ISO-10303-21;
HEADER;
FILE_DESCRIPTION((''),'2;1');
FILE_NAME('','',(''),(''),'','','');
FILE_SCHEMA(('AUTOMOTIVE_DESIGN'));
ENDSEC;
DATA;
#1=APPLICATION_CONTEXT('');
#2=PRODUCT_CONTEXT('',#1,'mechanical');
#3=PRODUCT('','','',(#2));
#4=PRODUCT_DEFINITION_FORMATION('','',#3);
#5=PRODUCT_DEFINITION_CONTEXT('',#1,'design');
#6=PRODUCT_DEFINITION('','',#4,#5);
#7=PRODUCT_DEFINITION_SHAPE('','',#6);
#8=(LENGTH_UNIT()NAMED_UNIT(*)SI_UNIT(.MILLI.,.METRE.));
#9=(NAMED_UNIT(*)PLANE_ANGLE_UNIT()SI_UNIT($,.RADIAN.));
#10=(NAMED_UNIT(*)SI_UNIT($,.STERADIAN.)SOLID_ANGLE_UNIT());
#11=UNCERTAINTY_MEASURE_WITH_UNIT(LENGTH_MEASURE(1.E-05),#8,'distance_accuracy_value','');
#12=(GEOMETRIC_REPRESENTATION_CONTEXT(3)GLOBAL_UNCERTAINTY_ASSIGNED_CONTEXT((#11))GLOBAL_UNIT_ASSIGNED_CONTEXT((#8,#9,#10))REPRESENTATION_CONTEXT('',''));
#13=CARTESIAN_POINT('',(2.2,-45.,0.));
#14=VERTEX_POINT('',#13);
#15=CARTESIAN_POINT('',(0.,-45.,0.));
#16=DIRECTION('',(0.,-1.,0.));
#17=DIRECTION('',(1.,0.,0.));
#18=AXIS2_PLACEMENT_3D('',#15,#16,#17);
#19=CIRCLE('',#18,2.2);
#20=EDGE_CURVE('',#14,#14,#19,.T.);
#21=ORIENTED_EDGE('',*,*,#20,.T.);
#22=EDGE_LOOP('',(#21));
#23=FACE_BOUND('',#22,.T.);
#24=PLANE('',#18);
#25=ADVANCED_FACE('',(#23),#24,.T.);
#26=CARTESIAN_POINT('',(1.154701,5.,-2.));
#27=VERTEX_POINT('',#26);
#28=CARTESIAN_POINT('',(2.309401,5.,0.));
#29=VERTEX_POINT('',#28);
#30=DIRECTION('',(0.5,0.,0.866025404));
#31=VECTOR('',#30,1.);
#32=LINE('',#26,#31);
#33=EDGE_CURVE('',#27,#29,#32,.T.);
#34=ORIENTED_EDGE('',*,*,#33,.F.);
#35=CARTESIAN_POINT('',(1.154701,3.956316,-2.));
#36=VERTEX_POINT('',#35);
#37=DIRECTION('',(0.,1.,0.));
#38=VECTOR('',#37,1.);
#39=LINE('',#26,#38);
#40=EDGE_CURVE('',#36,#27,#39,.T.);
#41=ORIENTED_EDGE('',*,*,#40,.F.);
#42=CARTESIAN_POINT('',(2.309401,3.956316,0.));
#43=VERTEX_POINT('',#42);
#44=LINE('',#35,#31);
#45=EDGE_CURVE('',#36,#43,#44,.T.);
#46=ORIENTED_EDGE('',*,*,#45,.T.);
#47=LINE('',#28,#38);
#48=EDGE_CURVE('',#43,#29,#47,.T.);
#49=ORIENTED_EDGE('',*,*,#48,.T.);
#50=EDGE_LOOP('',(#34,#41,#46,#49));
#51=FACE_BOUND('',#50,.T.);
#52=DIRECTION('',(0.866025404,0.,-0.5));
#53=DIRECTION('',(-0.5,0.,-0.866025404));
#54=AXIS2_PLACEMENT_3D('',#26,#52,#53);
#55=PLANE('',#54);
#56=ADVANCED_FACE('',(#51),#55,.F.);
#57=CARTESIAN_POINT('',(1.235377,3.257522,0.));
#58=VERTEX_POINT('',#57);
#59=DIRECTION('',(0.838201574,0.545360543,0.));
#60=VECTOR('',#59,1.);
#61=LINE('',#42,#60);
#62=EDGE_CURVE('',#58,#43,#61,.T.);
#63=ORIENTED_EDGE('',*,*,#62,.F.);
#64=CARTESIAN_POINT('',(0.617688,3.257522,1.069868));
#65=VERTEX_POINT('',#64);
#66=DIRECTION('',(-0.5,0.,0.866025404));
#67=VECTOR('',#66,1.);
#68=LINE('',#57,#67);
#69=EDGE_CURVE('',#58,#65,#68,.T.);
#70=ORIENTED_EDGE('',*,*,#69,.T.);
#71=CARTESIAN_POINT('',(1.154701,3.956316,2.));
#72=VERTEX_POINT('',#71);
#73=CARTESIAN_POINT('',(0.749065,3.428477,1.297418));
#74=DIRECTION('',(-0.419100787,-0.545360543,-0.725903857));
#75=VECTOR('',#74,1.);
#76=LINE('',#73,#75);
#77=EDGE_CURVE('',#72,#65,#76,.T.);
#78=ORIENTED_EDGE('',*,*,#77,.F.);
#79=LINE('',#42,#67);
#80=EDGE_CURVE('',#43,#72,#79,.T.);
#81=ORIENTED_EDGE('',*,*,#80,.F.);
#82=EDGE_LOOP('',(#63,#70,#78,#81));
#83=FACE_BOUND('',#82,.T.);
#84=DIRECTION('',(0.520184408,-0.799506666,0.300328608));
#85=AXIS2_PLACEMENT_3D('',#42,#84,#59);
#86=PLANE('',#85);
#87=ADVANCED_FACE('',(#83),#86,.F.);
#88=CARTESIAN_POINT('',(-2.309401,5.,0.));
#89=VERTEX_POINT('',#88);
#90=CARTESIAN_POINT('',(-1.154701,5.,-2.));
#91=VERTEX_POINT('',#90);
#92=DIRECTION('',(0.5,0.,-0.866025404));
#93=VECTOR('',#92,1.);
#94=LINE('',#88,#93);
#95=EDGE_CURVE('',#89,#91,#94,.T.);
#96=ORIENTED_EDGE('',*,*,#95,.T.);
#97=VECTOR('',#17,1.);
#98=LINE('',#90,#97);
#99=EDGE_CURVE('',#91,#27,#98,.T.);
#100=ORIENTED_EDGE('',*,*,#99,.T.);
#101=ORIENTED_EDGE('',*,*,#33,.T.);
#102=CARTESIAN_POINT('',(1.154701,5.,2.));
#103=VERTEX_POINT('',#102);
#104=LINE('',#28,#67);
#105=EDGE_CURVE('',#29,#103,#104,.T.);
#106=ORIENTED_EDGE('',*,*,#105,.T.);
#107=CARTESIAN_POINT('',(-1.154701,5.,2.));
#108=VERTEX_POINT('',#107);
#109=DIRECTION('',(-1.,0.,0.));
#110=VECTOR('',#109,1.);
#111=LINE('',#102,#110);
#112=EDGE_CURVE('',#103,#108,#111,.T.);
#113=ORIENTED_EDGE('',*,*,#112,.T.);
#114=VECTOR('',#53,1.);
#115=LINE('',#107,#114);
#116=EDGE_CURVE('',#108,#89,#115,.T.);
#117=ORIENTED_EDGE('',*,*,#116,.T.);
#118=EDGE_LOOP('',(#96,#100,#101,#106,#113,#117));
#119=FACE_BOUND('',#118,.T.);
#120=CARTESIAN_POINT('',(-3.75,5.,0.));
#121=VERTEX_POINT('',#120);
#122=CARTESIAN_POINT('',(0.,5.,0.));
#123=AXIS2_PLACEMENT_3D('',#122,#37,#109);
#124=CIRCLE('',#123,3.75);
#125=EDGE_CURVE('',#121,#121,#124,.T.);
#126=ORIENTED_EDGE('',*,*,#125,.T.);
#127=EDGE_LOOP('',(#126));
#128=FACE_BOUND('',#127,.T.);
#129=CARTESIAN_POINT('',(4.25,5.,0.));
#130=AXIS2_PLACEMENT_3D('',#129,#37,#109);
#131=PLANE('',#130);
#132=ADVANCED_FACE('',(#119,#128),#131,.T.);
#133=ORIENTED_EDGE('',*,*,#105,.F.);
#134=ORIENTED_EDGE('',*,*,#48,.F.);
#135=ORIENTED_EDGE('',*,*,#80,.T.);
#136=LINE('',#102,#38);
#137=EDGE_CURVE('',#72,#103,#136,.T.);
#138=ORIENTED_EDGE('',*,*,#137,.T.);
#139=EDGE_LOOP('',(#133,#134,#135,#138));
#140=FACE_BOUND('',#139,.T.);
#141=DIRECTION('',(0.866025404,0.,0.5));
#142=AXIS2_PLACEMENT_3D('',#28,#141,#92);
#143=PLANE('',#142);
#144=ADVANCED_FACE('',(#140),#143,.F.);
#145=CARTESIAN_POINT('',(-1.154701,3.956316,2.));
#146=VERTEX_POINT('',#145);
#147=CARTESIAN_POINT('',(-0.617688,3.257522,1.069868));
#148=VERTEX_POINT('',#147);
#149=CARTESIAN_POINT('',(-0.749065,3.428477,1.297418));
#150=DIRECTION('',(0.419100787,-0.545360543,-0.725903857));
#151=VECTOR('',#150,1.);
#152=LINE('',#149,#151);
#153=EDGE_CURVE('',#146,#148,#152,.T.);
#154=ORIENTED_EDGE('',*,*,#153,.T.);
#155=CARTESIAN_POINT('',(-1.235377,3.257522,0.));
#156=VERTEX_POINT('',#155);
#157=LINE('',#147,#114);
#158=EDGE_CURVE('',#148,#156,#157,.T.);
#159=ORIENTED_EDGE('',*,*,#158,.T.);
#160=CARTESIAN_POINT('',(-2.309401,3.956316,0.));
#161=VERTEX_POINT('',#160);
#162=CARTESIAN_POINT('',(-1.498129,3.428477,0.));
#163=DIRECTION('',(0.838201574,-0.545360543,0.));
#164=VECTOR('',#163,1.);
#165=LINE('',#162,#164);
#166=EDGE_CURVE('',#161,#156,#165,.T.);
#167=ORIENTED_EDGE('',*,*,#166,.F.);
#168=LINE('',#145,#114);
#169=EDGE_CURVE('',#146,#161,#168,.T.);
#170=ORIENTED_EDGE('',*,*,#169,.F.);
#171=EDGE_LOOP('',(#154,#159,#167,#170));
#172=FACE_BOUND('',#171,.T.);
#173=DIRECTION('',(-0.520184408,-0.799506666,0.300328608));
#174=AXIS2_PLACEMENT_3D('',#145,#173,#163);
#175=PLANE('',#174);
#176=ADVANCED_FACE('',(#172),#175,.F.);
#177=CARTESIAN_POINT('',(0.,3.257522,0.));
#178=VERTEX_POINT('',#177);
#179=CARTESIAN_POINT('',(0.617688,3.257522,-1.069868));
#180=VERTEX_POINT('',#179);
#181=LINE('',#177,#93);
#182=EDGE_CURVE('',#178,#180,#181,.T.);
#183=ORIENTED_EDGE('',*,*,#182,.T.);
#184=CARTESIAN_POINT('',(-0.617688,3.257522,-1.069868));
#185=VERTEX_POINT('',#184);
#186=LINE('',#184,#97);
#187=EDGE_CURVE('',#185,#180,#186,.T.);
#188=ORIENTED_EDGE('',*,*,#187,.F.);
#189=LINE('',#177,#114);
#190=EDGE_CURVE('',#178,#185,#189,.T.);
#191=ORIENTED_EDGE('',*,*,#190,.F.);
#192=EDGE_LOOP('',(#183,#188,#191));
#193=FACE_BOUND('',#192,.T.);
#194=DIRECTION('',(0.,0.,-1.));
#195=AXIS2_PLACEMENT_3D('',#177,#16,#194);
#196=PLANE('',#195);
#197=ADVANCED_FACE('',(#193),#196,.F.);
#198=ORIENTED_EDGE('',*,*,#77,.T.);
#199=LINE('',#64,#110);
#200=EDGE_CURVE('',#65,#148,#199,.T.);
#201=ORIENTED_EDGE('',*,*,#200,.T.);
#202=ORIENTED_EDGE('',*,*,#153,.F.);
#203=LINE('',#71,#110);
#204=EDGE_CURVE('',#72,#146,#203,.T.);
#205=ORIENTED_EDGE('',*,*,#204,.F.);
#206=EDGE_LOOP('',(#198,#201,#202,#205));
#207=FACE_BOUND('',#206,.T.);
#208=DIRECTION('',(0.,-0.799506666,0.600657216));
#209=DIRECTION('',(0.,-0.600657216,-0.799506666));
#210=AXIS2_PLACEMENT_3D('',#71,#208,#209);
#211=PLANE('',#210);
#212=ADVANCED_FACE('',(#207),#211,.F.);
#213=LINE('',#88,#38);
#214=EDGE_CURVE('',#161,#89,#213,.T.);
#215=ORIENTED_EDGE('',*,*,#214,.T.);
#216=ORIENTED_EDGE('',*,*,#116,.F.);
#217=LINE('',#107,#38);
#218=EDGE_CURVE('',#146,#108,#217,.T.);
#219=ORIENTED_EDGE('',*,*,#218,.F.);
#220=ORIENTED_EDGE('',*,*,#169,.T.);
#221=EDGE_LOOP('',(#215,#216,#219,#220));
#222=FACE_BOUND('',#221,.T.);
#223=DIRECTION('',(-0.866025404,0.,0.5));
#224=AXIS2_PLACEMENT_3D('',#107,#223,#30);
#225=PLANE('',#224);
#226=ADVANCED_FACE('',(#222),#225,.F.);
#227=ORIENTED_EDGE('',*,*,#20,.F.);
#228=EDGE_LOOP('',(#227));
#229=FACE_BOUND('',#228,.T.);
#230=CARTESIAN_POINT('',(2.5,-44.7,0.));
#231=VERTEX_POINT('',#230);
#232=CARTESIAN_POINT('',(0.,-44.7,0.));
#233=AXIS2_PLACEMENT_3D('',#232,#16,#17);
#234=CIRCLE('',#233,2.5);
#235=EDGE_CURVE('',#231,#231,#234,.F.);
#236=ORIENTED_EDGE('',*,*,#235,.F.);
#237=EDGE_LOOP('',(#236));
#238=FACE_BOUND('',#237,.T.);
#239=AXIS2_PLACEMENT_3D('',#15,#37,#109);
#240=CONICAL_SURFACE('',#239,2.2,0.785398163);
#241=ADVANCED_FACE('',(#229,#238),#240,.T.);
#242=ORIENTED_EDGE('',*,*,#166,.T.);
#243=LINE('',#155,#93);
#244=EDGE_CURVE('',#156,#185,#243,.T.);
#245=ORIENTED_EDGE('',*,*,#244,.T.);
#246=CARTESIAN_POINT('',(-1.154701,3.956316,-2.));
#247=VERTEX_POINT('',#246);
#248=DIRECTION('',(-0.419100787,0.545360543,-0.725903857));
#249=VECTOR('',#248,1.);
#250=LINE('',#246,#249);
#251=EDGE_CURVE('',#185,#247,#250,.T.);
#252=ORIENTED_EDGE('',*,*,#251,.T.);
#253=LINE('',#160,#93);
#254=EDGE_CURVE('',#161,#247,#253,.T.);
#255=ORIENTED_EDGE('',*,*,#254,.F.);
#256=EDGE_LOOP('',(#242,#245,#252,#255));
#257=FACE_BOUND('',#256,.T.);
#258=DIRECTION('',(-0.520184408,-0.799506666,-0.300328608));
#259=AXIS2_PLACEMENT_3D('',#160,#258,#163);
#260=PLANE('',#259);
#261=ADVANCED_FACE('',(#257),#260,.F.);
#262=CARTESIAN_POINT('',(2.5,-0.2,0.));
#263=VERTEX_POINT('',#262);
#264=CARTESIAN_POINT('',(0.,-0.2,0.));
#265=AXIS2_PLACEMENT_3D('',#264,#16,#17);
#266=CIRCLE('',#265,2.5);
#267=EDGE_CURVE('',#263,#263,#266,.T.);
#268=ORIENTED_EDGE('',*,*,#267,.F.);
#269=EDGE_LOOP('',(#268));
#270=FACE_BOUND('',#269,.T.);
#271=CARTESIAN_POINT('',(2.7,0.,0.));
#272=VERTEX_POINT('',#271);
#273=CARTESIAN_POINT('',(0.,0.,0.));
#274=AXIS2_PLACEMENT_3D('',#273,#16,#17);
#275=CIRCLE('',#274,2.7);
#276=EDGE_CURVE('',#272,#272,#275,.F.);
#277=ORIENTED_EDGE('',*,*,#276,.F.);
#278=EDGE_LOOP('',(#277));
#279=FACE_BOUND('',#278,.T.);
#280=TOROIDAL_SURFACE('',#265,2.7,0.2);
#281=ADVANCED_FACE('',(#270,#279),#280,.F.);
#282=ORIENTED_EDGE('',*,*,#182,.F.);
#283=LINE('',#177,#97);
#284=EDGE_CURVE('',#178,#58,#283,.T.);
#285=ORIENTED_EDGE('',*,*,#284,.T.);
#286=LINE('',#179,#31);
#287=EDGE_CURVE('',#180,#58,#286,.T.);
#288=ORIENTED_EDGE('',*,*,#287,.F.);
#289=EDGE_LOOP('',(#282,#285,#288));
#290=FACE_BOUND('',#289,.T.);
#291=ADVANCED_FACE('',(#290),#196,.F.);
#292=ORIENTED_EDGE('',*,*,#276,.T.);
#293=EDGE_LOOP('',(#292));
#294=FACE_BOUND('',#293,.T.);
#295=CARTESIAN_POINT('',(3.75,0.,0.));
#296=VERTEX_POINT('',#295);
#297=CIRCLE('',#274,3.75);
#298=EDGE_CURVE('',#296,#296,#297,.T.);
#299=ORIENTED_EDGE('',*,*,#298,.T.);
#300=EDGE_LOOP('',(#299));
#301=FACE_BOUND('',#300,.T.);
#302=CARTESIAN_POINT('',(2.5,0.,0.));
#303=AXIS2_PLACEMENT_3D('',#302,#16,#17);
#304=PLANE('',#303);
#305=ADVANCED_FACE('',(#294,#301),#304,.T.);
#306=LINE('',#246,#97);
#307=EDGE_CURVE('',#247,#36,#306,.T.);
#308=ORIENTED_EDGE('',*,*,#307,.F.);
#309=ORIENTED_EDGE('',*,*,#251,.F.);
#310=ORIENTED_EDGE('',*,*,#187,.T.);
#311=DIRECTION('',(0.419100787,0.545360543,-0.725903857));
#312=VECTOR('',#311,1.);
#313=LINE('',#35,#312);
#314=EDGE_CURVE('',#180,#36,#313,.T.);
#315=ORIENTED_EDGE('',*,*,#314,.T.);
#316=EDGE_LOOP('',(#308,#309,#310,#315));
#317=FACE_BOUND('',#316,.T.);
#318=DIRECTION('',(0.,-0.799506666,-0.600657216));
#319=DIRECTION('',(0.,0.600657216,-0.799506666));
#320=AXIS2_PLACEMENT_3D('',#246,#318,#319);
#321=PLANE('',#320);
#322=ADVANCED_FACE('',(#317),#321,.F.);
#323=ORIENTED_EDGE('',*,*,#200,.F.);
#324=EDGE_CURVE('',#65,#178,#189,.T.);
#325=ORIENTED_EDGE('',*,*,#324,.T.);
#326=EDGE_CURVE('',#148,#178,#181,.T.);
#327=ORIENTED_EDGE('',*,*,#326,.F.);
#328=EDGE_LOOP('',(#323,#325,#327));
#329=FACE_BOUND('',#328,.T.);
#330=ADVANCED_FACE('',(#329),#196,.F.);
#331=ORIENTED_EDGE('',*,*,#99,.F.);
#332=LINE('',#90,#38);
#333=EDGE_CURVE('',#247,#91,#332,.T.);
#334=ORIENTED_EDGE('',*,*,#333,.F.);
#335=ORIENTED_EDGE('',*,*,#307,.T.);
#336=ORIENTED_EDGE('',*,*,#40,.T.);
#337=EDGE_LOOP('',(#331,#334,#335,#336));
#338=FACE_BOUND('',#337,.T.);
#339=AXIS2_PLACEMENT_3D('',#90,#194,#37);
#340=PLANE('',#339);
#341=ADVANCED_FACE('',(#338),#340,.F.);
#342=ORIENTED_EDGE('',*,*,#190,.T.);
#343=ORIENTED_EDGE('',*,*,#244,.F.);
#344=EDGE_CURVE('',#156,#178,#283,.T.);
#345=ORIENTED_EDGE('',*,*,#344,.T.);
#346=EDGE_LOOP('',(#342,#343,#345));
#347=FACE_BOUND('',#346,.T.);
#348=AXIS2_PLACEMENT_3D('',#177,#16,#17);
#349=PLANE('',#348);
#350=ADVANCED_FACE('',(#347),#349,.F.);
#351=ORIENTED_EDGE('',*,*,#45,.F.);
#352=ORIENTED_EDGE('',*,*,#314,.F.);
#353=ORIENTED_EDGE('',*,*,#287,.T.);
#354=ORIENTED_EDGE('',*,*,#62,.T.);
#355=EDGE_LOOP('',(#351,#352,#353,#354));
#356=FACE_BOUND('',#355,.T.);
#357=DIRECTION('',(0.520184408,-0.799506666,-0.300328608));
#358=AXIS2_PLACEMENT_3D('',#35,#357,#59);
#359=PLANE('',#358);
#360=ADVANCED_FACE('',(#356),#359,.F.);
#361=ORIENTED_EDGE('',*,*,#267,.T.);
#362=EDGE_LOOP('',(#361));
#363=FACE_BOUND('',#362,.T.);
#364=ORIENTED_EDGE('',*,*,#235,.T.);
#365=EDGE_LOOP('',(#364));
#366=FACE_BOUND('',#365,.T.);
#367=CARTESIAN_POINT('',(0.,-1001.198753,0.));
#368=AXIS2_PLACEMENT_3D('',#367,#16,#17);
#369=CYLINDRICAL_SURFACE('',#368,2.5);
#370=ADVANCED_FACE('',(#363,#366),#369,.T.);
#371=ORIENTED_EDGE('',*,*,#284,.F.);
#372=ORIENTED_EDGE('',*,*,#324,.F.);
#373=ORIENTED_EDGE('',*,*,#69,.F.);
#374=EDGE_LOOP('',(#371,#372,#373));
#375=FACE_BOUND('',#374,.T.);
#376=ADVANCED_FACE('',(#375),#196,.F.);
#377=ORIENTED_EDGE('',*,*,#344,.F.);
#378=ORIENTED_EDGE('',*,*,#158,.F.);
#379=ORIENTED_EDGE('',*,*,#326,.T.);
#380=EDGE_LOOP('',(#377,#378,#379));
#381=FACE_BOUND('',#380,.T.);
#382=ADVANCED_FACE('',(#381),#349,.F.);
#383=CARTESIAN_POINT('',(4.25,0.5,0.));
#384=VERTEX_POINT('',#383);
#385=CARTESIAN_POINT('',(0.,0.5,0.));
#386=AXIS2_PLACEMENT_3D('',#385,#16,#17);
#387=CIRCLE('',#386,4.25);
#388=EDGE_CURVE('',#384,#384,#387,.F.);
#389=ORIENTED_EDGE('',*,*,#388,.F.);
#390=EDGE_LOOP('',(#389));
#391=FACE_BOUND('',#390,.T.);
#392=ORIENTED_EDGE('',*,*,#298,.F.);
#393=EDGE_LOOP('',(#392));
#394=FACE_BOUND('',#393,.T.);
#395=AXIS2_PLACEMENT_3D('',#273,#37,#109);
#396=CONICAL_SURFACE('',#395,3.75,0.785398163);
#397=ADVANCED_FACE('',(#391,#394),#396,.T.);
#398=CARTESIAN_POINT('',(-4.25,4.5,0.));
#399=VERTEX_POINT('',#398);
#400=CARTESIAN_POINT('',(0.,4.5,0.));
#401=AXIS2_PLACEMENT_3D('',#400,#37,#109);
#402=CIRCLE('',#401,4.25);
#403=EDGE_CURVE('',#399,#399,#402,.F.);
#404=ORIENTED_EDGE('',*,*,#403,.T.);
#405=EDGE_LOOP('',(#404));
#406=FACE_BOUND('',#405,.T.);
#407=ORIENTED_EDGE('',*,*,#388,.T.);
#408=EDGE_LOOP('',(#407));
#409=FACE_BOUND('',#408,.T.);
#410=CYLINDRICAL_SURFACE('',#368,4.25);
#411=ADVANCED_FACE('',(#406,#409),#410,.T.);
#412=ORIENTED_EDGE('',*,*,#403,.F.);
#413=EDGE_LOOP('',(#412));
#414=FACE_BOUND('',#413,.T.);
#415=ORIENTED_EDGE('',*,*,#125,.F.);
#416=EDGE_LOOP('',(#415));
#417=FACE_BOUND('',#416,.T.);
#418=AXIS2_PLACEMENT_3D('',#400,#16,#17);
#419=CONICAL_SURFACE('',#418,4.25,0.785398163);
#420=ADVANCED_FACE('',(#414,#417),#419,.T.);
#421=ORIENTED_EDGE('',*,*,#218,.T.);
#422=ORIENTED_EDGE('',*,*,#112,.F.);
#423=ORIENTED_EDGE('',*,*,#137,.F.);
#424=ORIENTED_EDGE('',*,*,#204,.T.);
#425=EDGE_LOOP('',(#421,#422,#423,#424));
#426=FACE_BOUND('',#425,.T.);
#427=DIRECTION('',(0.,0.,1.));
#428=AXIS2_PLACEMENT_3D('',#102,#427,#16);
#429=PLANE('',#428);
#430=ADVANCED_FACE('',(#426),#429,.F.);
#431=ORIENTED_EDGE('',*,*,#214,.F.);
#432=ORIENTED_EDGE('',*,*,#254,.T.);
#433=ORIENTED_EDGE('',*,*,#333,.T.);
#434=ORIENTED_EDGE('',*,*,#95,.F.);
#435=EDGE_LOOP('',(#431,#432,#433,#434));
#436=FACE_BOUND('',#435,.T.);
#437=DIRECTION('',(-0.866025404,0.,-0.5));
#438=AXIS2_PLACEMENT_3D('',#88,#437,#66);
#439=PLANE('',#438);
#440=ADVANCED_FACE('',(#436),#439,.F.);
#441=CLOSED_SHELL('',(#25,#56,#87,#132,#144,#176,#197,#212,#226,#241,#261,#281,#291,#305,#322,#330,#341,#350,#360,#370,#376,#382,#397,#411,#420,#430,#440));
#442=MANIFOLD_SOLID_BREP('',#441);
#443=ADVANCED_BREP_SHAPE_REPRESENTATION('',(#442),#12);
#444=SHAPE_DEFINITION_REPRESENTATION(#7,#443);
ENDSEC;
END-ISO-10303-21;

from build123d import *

# Parameters (mm, degrees)
REDONDEO1_R          = 0.2
CHAFL_N1_SIZE        = 0.3
CHAFL_N2_SIZE        = 0.5
CORTAR_BARRER1_START = 3.956316317
CORTAR_BARRER1_DEPTH = 1.043683683


with BuildPart() as part:
    # Croquis1 → Revolución1 (revolve)
    with BuildSketch(Plane.XY):
        Polygon((0, 0), (0, -45), (2.5, -45), (2.5, 0), (4.25, 0), (4.25, 5), (0, 5), align=None)
    revolve(axis=Axis((0, -1001.198752701, 0), (0, 1, 0)))

    # Redondeo1
    redondeo1_edges = [part.edges().sort_by_distance(p)[0] for p in [
        (-2.5, 0, 0),
    ]]
    fillet(redondeo1_edges, radius=REDONDEO1_R)

    # Chaflán1
    chafl_n1_edges = [part.edges().sort_by_distance(p)[0] for p in [
        (-2.5, -45, 0),
    ]]
    chamfer(chafl_n1_edges, length=CHAFL_N1_SIZE)

    # Chaflán2
    chafl_n2_edges = [part.edges().sort_by_distance(p)[0] for p in [
        (-4.25, 5, 0),
        (-4.25, 0, 0),
    ]]
    chamfer(chafl_n2_edges, length=CHAFL_N2_SIZE)

    # Cortar-Barrer1: read off the stored shape, not the designer's step
    # Cortar-Barrer1 outline → Cortar-Barrer1 (cut)
    with BuildSketch(Plane(origin=(0, 0, 0), x_dir=(1, 0, 0), z_dir=(0, 1, 0)).offset(CORTAR_BARRER1_START)):
        Polygon((1.154700538, 2), (-1.154700538, 2), (-2.309401077, 0), (-1.154700538, -2), (1.154700538, -2), (2.309401077, 0), align=None)
    extrude(amount=CORTAR_BARRER1_DEPTH, mode=Mode.SUBTRACT)

    # Cortar-Barrer1 2: loft between two sections, ruled curve by curve
    cortar_barrer1_2_from = [
        Edge.make_line((-2.309401077, 3.956316317, 0), (-1.154700538, 3.956316317, -2)),
        Edge.make_line((-1.154700538, 3.956316317, 2), (-2.309401077, 3.956316317, 0)),
        Edge.make_line((-1.154700538, 3.956316317, -2), (1.154700538, 3.956316317, -2)),
        Edge.make_line((1.154700538, 3.956316317, 2), (-1.154700538, 3.956316317, 2)),
        Edge.make_line((1.154700538, 3.956316317, -2), (2.309401077, 3.956316317, 0)),
        Edge.make_line((2.309401077, 3.956316317, 0), (1.154700538, 3.956316317, 2)),
    ]
    cortar_barrer1_2_to = [
        Edge.make_line((-1.235376897, 3.257522104, 0), (-0.617688448, 3.257522104, -1.069867776)),
        Edge.make_line((-0.617688448, 3.257522104, 1.069867776), (-1.235376897, 3.257522104, 0)),
        Edge.make_line((-0.617688448, 3.257522104, -1.069867776), (0.617688448, 3.257522104, -1.069867776)),
        Edge.make_line((0.617688448, 3.257522104, 1.069867776), (-0.617688448, 3.257522104, 1.069867776)),
        Edge.make_line((0.617688448, 3.257522104, -1.069867776), (1.235376897, 3.257522104, 0)),
        Edge.make_line((1.235376897, 3.257522104, 0), (0.617688448, 3.257522104, 1.069867776)),
    ]
    cortar_barrer1_2 = Solid(Shell([*[Face.make_surface_from_curves(cortar_barrer1_2_from[k], cortar_barrer1_2_to[k]) for k in range(6)], Face(Wire(cortar_barrer1_2_from)), Face(Wire(cortar_barrer1_2_to))]))
    add(cortar_barrer1_2, mode=Mode.SUBTRACT)


solid = part.part
